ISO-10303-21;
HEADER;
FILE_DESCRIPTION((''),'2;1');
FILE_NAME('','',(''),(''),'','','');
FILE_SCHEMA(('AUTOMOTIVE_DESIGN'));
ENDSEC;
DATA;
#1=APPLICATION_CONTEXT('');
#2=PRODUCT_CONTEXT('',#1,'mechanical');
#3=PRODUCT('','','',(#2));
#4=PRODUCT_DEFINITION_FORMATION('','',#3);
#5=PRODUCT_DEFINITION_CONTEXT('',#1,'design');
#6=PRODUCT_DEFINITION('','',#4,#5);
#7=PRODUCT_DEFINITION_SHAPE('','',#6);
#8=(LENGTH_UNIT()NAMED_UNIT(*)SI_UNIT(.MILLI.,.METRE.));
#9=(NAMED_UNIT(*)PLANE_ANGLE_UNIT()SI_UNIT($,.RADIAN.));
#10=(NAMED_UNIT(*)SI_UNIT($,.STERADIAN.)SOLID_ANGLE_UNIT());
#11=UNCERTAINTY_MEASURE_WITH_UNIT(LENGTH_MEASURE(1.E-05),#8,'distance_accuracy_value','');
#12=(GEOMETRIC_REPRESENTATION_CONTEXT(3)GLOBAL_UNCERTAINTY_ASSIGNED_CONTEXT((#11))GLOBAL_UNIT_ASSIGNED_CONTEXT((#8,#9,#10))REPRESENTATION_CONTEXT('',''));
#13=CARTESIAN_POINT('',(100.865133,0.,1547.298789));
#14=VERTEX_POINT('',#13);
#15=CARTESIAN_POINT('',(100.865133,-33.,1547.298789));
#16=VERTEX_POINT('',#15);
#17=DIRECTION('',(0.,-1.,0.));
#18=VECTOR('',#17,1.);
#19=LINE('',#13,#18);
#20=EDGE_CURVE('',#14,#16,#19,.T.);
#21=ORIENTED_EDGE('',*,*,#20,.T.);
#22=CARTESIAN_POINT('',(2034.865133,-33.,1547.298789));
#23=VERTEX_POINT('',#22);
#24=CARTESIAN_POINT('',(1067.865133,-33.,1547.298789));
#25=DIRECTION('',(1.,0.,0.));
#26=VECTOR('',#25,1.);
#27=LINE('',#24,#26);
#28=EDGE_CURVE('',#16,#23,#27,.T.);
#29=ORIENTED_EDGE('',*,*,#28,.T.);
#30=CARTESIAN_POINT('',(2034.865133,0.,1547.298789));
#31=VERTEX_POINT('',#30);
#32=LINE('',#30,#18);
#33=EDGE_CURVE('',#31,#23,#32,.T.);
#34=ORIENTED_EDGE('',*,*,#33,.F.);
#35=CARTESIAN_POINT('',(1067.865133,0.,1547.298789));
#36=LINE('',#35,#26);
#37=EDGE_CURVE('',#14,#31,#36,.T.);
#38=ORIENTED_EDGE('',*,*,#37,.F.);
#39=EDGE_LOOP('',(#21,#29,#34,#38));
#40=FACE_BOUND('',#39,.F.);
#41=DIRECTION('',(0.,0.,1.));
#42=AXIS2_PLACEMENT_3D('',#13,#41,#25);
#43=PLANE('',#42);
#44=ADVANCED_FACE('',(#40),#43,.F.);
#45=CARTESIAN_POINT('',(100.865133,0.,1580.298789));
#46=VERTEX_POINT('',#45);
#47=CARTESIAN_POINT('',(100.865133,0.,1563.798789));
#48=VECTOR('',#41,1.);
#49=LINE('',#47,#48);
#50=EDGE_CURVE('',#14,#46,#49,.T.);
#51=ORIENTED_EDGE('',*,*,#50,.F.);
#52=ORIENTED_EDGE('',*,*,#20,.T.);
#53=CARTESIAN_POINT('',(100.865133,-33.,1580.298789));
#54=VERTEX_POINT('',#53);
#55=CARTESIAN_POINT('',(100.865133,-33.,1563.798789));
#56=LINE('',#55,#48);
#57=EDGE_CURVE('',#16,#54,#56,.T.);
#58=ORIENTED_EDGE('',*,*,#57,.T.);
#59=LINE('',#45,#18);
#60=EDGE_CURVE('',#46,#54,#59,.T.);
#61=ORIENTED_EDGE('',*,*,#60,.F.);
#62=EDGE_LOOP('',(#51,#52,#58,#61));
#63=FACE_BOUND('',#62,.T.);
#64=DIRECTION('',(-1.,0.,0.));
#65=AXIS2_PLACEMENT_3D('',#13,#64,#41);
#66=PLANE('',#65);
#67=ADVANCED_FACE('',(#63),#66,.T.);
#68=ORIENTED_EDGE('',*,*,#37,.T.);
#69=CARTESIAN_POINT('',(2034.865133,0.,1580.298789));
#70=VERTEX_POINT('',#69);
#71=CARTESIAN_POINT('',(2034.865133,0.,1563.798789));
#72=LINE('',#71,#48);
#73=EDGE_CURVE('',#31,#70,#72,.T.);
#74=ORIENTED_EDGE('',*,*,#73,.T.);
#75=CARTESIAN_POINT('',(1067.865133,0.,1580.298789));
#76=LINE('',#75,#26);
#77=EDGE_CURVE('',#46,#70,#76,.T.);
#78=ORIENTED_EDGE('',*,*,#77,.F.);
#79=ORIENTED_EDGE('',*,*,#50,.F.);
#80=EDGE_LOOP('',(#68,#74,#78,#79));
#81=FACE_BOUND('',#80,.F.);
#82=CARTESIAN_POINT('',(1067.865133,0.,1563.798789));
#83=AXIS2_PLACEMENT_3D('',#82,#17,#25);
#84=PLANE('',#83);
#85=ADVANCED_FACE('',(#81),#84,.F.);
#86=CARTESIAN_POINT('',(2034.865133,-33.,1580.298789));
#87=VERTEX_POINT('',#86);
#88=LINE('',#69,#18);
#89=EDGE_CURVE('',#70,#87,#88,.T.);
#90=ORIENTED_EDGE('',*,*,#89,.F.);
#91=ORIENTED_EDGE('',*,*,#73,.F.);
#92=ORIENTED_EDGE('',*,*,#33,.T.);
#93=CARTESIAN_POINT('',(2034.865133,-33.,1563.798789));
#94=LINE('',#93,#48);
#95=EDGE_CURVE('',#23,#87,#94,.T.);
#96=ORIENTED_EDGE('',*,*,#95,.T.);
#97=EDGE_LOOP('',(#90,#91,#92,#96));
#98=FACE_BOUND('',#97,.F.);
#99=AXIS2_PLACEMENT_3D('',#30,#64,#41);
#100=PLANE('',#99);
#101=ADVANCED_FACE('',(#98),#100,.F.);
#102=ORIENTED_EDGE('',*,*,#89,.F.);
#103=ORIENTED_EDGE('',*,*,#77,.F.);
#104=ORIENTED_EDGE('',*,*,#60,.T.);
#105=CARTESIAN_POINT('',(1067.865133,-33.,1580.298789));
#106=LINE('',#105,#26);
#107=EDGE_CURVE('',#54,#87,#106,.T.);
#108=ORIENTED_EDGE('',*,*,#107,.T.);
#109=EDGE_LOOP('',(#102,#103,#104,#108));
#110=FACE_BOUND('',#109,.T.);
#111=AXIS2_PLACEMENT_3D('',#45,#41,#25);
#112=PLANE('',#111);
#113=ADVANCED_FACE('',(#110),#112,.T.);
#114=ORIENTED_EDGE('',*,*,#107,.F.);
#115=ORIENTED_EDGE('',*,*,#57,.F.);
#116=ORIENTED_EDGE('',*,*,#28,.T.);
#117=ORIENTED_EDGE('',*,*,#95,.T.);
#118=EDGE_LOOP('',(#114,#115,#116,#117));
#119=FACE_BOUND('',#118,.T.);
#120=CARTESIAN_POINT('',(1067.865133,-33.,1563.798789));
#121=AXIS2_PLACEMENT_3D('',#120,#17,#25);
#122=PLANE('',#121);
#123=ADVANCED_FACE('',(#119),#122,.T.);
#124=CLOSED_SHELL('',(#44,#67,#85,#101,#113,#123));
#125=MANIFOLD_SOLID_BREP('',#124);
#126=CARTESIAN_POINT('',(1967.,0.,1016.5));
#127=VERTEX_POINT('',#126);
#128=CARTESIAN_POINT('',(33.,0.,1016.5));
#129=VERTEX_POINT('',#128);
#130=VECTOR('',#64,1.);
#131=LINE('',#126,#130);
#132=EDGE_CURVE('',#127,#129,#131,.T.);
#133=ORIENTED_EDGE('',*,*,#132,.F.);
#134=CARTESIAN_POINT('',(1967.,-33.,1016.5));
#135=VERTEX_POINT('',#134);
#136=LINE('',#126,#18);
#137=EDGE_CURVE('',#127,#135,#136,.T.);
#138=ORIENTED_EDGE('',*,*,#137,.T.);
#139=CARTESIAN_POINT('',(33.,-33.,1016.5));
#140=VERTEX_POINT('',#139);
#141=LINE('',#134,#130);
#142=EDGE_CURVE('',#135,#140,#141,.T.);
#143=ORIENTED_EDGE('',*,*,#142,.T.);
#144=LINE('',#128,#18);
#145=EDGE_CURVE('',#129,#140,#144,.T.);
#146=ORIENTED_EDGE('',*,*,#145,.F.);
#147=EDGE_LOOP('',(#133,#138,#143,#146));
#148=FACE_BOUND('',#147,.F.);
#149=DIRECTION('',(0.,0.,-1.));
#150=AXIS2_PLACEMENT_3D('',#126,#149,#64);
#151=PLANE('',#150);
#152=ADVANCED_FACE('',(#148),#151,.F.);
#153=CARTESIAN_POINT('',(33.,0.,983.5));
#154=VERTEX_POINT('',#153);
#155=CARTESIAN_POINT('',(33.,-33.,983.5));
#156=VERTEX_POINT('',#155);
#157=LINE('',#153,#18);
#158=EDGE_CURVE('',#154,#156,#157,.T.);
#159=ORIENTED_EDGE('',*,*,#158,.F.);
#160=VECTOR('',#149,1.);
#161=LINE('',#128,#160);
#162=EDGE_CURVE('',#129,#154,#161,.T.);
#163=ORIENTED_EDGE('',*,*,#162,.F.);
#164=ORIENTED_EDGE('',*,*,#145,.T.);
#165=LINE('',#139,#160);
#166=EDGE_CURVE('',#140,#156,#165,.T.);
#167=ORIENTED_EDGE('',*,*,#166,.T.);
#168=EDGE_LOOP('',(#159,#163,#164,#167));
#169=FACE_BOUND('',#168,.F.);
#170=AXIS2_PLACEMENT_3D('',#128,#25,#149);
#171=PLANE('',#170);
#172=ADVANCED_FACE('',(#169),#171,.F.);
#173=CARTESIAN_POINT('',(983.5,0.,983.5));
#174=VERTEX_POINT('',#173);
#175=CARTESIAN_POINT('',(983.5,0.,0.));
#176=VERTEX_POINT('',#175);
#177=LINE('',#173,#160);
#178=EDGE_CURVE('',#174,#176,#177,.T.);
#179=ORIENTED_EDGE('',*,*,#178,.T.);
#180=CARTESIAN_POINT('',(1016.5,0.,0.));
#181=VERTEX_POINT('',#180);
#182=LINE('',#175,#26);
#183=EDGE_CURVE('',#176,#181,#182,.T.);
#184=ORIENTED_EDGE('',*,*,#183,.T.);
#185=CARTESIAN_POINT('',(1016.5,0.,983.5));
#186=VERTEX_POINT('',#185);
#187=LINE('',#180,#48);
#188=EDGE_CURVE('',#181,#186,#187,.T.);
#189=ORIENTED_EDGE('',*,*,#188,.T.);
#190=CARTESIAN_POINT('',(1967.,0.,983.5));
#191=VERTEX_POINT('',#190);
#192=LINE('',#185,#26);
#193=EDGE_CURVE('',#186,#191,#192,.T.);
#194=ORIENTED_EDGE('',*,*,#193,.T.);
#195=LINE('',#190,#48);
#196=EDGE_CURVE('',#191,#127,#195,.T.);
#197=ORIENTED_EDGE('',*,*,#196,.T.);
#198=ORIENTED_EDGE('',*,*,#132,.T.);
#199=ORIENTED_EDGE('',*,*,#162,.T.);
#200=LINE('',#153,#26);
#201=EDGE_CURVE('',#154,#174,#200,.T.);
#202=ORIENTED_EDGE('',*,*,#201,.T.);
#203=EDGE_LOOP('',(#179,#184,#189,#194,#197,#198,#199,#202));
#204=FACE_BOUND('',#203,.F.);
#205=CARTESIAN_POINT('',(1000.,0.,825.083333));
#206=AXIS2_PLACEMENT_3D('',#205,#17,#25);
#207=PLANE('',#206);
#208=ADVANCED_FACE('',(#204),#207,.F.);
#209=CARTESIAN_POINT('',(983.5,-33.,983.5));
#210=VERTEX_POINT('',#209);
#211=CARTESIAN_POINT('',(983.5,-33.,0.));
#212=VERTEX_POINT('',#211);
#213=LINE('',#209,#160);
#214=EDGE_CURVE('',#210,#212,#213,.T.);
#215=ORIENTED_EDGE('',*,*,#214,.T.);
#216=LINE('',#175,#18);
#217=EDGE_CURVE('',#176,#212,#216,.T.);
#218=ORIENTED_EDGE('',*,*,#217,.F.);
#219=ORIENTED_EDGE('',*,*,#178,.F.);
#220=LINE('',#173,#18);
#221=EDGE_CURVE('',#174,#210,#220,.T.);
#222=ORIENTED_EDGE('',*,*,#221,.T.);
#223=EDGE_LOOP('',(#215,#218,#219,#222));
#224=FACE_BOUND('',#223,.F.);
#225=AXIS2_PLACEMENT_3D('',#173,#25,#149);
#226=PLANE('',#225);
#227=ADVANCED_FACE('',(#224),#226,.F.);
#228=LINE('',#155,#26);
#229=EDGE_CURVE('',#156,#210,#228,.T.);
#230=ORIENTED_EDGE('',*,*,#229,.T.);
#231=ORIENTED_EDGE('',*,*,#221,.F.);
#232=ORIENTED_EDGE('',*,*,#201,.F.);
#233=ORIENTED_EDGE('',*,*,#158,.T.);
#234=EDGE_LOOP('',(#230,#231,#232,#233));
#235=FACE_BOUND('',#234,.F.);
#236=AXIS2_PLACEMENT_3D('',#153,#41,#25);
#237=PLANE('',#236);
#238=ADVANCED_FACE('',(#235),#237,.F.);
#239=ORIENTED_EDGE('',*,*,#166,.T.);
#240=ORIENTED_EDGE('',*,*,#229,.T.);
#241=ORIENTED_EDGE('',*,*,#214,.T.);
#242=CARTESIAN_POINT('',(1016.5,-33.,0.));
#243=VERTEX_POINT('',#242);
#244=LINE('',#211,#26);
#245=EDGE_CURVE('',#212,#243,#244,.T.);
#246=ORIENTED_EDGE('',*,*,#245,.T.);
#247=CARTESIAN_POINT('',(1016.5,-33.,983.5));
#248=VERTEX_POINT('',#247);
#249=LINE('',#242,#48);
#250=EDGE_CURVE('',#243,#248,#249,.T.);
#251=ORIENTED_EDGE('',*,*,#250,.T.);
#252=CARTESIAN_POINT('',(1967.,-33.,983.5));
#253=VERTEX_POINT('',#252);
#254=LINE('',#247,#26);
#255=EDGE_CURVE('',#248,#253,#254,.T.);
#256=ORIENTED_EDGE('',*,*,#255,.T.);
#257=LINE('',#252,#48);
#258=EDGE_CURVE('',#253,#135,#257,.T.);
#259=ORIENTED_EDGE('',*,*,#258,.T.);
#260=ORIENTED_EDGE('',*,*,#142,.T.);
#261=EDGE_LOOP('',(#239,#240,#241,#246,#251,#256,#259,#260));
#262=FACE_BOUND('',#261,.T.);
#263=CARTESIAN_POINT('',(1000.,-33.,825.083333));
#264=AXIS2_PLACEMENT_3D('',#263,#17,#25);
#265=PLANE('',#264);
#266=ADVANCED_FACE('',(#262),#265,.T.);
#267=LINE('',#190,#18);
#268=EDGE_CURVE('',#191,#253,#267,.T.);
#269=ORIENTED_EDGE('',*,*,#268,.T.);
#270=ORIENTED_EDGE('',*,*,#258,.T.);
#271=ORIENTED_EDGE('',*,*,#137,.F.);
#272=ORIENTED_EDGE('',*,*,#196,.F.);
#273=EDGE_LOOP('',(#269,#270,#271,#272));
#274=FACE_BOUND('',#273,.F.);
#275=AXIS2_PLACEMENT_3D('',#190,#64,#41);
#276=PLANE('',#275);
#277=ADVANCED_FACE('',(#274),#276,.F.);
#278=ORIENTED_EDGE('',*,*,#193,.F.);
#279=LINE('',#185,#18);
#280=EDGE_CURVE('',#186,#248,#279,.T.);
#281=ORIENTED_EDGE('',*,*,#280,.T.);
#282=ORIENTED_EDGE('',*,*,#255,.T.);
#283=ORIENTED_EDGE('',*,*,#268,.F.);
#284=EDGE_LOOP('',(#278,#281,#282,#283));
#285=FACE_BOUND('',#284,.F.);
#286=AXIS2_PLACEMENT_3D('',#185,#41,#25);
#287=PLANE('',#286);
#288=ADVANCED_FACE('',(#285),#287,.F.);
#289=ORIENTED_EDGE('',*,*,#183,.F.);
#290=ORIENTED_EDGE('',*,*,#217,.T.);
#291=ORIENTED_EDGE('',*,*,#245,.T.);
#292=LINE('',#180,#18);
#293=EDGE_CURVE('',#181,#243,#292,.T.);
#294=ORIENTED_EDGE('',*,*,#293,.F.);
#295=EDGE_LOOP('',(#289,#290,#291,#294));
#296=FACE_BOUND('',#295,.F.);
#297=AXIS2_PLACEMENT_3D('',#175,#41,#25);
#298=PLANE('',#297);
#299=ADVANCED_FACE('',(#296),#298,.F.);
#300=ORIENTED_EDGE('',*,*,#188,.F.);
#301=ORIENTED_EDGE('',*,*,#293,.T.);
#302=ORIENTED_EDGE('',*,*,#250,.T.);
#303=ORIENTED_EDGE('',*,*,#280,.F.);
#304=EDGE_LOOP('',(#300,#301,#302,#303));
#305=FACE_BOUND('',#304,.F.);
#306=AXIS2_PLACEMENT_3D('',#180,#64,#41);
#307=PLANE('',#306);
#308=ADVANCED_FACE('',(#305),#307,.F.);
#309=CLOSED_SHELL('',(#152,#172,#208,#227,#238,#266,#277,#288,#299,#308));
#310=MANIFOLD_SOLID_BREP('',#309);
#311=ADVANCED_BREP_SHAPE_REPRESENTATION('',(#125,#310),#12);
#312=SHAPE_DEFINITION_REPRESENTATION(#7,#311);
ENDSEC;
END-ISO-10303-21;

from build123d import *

# Parameters (mm, degrees)
F1_DEPTH = 33
F0_W     = 1934
F0_H     = 33


# Not quite as in the source:
# - a feature names something its author has since deleted; it is built from what else it names


with BuildPart() as f1:
    # F0 (on Front) → F1 (new body)
    with BuildSketch(Plane.XZ):
        Polygon((983.5, 983.5), (983.5, 0), (1016.5, 0), (1016.5, 983.5), (1967, 983.5), (1967, 1016.5), (33, 1016.5), (33, 983.5), align=None)
    extrude(amount=F1_DEPTH)


with BuildPart() as f1b:
    # F0 (on Front) → F1, piece 2 (new body)
    with BuildSketch(Plane.XZ):
        with Locations((1067.8651331067, 1563.7987890244)):
            Rectangle(F0_W, F0_H)
    extrude(amount=F1_DEPTH)


solid = Compound([f1.part, f1b.part])
